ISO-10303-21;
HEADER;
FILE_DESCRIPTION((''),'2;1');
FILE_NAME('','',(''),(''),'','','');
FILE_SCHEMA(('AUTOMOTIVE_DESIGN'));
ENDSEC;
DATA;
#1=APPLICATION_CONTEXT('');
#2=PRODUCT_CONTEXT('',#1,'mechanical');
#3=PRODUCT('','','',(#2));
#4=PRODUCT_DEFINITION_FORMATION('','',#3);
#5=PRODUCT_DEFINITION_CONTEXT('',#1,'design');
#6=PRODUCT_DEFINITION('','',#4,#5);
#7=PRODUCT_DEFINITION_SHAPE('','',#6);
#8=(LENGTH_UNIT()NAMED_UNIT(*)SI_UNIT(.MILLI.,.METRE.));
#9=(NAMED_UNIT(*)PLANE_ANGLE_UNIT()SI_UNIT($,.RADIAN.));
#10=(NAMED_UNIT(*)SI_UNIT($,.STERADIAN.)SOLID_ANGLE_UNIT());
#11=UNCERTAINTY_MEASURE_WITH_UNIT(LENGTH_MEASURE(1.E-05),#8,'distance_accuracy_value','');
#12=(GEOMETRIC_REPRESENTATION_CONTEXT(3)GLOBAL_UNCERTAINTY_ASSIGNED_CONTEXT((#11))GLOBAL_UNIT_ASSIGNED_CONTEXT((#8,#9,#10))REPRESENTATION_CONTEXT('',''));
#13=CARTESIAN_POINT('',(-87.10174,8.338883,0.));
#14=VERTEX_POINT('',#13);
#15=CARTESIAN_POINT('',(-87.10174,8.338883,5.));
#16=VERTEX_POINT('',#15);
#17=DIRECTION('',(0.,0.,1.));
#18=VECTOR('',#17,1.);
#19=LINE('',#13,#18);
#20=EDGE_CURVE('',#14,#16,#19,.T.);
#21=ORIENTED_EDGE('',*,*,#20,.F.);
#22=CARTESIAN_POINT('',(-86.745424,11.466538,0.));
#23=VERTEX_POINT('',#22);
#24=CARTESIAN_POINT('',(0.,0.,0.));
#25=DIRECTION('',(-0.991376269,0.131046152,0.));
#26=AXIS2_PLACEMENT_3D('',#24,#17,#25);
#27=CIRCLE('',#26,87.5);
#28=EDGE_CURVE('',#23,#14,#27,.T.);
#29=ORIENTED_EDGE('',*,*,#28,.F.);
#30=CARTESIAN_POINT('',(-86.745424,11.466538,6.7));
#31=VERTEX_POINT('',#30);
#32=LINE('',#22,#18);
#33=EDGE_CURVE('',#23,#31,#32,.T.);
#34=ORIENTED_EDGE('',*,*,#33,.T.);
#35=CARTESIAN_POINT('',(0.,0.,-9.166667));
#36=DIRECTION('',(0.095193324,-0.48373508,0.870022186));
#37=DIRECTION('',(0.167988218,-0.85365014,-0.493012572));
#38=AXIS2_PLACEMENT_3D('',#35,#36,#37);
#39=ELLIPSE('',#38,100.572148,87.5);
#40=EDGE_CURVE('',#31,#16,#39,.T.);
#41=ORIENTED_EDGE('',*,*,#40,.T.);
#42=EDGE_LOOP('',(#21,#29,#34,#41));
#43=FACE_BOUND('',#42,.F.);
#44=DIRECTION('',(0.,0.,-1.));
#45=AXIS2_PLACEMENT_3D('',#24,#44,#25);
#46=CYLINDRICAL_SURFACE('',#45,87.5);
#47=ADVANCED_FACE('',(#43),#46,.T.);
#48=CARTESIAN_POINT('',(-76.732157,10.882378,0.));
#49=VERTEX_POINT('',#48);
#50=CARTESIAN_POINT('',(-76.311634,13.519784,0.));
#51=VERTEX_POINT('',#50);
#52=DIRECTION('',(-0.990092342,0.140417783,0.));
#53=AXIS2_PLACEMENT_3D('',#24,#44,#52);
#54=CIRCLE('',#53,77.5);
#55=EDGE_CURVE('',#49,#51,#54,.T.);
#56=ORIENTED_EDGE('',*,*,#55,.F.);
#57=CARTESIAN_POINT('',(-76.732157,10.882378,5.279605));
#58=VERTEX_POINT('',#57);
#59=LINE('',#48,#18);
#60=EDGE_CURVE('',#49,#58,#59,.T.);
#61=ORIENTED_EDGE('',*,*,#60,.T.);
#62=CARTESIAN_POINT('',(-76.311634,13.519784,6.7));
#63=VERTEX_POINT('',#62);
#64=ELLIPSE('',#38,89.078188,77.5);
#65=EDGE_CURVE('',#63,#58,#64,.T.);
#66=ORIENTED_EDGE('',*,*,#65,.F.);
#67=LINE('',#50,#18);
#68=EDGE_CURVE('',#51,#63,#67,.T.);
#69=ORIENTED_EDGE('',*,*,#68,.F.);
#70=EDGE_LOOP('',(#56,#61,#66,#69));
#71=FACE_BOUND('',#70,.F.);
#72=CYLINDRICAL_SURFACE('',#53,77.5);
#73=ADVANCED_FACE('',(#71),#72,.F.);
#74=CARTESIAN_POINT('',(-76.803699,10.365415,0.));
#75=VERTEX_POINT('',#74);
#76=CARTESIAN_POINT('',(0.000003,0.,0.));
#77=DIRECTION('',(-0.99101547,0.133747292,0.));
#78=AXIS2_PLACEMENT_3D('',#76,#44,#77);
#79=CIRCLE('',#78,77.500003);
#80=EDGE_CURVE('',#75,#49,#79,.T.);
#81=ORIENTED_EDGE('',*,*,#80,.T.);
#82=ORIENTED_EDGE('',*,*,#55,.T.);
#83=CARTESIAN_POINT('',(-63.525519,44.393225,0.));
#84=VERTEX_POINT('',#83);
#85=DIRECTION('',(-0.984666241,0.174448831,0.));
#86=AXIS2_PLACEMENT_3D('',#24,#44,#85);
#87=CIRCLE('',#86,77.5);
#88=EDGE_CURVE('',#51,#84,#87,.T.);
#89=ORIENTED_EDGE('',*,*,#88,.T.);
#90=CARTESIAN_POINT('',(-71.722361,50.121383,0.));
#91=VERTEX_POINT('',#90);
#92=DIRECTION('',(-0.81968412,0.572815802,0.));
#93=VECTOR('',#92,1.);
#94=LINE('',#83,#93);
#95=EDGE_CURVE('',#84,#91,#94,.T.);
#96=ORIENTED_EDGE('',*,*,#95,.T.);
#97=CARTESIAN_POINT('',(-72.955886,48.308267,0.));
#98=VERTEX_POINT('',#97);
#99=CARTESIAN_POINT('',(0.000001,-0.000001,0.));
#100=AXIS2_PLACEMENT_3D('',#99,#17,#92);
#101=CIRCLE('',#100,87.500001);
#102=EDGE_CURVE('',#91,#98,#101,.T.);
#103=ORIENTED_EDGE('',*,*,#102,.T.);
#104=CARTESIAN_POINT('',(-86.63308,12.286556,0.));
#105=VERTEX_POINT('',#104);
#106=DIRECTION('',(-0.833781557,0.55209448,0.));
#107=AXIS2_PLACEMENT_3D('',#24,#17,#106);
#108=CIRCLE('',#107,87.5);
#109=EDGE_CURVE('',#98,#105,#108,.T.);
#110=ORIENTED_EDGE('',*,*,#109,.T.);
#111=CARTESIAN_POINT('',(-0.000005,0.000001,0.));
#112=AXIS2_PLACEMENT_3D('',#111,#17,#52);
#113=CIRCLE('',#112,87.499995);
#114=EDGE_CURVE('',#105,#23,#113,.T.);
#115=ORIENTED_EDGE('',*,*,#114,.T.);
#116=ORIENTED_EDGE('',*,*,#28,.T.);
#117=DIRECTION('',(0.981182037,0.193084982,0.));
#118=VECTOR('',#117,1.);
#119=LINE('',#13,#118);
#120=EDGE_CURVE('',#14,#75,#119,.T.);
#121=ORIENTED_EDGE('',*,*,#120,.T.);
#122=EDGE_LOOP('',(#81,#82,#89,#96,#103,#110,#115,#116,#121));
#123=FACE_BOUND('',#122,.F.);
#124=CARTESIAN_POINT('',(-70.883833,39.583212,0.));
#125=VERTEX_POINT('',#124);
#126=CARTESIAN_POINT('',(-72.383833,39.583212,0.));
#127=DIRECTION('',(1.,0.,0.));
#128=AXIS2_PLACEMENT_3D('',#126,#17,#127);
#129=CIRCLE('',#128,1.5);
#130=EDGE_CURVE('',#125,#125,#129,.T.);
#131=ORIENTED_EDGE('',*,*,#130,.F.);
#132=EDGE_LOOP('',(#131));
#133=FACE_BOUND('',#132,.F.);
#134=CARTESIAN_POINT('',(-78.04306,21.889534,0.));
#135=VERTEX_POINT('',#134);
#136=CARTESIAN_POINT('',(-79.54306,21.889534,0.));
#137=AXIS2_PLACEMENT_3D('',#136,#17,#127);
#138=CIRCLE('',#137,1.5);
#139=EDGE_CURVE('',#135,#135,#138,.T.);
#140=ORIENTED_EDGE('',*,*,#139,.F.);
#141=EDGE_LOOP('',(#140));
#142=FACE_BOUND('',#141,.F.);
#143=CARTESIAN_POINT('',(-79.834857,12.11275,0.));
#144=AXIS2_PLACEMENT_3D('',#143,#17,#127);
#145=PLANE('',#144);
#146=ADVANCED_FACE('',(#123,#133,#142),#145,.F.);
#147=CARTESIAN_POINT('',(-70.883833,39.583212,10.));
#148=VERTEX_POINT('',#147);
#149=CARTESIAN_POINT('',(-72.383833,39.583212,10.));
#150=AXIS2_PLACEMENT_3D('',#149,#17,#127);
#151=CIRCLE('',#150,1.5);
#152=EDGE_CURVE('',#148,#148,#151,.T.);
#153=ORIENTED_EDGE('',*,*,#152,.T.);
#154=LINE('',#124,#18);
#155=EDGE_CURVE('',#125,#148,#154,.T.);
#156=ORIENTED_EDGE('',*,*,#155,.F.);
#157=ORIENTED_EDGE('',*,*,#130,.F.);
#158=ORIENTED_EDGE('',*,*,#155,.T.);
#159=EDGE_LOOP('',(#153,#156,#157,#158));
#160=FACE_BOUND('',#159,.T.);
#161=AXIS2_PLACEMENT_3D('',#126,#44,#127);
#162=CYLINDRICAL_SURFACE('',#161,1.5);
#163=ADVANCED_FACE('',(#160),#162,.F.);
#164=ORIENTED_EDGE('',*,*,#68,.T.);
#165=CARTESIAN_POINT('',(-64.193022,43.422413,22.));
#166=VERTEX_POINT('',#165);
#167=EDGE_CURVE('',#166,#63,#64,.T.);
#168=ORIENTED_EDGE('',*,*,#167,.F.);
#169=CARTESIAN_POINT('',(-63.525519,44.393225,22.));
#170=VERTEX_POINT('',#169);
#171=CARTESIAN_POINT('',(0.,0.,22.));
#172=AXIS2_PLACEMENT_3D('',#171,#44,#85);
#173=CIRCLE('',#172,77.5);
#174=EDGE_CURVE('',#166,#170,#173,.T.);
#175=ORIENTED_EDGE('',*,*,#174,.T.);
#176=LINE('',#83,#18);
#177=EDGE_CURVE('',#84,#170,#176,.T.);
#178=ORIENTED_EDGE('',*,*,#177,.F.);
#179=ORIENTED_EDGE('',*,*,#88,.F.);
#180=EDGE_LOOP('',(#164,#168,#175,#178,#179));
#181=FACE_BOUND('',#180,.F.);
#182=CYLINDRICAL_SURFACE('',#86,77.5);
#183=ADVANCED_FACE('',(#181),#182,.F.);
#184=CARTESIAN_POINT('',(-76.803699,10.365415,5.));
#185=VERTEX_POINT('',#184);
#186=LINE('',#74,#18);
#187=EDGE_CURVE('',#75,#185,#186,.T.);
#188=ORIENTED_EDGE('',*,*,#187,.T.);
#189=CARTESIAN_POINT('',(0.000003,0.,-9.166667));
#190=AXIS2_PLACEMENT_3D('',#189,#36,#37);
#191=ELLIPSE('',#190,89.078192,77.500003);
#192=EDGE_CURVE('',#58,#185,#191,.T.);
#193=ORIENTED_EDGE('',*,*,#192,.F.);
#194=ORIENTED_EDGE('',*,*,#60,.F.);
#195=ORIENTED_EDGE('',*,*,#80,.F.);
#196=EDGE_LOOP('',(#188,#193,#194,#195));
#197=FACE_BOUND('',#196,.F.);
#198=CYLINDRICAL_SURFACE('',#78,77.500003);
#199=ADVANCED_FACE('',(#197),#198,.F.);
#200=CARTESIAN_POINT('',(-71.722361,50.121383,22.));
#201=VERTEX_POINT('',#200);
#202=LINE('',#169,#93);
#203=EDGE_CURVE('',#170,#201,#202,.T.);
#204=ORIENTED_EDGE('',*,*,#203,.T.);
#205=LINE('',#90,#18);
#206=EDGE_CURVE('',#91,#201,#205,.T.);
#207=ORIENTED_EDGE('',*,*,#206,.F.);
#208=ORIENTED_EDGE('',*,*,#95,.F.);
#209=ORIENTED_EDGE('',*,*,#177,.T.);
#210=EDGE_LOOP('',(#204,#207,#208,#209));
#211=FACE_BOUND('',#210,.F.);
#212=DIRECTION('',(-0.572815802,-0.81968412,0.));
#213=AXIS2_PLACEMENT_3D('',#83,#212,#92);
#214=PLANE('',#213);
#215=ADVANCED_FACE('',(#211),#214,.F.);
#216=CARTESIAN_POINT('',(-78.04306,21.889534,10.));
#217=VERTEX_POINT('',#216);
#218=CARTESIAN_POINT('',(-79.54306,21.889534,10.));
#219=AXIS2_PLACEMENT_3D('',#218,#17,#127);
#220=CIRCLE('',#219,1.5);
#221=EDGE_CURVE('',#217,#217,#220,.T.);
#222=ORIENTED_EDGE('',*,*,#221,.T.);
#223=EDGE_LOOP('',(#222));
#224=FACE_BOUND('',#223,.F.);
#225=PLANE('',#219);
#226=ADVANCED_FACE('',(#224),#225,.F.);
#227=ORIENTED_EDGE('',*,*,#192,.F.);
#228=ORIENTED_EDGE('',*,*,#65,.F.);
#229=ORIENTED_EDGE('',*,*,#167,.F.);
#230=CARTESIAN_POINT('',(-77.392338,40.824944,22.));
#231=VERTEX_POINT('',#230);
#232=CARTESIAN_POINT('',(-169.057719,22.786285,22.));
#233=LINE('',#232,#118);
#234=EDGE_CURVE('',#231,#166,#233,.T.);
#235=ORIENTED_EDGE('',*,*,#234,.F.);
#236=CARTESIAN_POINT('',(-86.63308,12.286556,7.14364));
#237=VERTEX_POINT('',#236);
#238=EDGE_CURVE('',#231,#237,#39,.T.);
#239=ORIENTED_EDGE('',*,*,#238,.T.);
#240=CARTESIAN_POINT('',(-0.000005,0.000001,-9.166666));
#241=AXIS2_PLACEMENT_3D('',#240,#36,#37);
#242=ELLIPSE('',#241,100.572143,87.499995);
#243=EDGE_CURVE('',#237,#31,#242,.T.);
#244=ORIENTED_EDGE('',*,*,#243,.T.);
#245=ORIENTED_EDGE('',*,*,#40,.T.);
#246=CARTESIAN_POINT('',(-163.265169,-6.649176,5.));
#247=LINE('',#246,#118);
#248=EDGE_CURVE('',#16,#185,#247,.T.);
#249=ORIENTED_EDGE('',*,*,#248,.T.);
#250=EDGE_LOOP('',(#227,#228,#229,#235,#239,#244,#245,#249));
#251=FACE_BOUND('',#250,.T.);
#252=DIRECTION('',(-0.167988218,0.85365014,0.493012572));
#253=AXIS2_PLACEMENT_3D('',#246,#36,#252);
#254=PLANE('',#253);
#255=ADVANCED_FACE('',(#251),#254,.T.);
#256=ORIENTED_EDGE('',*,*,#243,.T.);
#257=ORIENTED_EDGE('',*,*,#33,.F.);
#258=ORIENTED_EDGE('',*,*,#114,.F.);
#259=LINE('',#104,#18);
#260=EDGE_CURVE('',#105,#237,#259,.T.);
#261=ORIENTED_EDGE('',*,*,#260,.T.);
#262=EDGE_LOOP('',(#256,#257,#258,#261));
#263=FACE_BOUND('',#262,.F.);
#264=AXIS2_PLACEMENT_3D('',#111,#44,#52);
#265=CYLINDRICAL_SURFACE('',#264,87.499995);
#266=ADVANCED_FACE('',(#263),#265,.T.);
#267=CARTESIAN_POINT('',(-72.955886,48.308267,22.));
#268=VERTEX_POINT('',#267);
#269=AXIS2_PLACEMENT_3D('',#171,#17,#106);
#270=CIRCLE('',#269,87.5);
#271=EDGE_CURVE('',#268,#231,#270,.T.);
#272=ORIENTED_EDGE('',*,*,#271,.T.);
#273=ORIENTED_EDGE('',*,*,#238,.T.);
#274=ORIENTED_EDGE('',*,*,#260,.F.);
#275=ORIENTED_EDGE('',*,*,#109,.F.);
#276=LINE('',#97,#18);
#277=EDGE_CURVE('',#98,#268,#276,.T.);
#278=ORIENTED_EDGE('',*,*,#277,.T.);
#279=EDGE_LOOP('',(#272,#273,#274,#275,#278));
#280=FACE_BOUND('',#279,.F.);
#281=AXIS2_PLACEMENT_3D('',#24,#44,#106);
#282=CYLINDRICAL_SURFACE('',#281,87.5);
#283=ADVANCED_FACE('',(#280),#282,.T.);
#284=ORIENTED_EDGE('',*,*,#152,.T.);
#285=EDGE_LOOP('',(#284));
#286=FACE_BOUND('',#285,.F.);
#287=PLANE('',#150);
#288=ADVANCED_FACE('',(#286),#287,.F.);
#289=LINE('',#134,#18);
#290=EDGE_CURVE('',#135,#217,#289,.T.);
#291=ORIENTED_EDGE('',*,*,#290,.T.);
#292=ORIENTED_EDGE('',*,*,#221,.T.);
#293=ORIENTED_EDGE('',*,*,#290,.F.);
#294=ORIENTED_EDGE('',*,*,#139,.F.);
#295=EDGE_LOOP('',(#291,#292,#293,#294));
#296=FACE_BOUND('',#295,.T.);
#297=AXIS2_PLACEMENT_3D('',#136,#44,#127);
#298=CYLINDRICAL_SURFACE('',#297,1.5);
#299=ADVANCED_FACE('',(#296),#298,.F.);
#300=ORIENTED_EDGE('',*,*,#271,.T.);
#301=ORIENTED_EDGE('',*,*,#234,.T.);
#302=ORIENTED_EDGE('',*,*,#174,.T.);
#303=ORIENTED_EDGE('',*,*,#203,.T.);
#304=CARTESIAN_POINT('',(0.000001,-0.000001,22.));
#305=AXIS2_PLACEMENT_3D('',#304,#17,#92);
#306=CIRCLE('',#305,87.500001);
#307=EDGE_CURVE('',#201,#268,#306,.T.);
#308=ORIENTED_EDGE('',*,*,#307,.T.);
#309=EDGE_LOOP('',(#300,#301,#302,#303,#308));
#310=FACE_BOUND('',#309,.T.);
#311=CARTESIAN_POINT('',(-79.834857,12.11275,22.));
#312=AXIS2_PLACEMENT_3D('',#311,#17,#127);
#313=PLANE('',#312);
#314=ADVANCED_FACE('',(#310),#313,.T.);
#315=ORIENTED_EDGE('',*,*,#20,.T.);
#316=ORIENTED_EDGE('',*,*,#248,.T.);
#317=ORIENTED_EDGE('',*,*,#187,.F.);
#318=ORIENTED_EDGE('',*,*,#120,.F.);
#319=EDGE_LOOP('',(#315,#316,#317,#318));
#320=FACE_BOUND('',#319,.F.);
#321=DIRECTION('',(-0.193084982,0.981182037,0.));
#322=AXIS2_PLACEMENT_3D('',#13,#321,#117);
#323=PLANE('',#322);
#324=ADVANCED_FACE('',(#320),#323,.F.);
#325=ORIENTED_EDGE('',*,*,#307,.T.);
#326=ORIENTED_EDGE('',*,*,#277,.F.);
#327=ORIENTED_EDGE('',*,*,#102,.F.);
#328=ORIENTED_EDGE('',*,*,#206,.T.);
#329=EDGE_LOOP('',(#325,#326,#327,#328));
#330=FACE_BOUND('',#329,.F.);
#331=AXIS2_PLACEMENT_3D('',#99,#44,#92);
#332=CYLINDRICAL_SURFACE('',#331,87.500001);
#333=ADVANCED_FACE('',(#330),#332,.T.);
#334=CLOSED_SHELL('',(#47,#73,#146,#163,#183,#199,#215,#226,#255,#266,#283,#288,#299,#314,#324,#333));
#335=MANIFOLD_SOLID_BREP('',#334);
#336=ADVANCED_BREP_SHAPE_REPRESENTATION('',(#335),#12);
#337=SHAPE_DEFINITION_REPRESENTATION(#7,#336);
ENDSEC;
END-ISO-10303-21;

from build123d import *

# Parameters (mm, degrees)
F0_R        = 1.5
F1_DEPTH    = 22
F2_T1_DEPTH = 165.7438624109
F3_DEPTH    = 10


# Not quite as in the source:
# - a fillet or chamfer that OpenCascade refuses, or shapes differently, is made with other operations: its cross-section is extruded or revolved along the edge and cut away or added


with BuildPart() as f1:
    # F0 (on Top) → F1 (new body)
    with BuildSketch(Plane.XY):
        with BuildLine():
            ThreePointArc((-76.7321565298, 10.8823781538), (-76.533256864, 12.202892845), (-76.3116336523, 13.5197843663))
            Line((-76.3116336523, 13.5197843663), (-84.2766601783, 11.9523616575))
            Line((-84.2766601783, 11.9523616575), (-76.7321565298, 10.8823781538))
        make_face()
        with BuildLine():
            ThreePointArc((-76.3116336523, 13.5197843663), (-71.9683443093, 28.7542591172), (-64.6180706596, 42.7873222372))
            Line((-64.6180706596, 42.7873222372), (-72.9558862286, 48.3082670421))
            ThreePointArc((-72.9558862286, 48.3082670421), (-81.8018975861, 31.0596128649), (-86.633079953, 12.2865559801))
            Line((-86.633079953, 12.2865559801), (-84.2766601783, 11.9523616575))
            Line((-84.2766601783, 11.9523616575), (-76.3116336523, 13.5197843663))
        make_face()
        with Locations((-79.5430595227, 21.8895336125)):
            Circle(F0_R, mode=Mode.SUBTRACT)
        with Locations((-72.3838330612, 39.5832124944)):
            Circle(F0_R, mode=Mode.SUBTRACT)
        with BuildLine():
            ThreePointArc((-64.6180706596, 42.7873222372), (-64.076826103, 43.5936962939), (-63.5255193134, 44.3932246628))
            Line((-63.5255193134, 44.3932246628), (-71.7223605151, 50.1213826839))
            ThreePointArc((-71.7223605151, 50.1213826839), (-72.3448036647, 49.218689364), (-72.9558862286, 48.3082670421))
            Line((-72.9558862286, 48.3082670421), (-64.6180706596, 42.7873222372))
        make_face()
        with BuildLine():
            ThreePointArc((-76.8036989266, 10.365415148), (-76.7683628871, 10.6239568725), (-76.7321565298, 10.8823781538))
            Line((-76.7321565298, 10.8823781538), (-84.2766601783, 11.9523616575))
            Line((-84.2766601783, 11.9523616575), (-86.7454235032, 11.466538329))
            ThreePointArc((-86.7454235032, 11.466538329), (-86.9376476661, 9.9043131153), (-87.1017395415, 8.3388829496))
            Line((-87.1017395415, 8.3388829496), (-76.8036989266, 10.365415148))
        make_face()
        with BuildLine():
            Line((-86.7454235032, 11.466538329), (-84.2766601783, 11.9523616575))
            Line((-84.2766601783, 11.9523616575), (-86.633079953, 12.2865559801))
            ThreePointArc((-86.633079953, 12.2865559801), (-86.6902213195, 11.8766799899), (-86.7454235032, 11.466538329))
        make_face()
        with Locations((-72.3838330612, 39.5832124944)):
            Circle(F0_R)
        with Locations((-79.5430595227, 21.8895336125)):
            Circle(F0_R)
    extrude(amount=F1_DEPTH)

    # F2: chamfer of 17 x 30 on 1 edges, made by hand

    # F2_s2 → F2_t1 (cut)
    with BuildSketch(Plane(origin=(-158.4380449398, -31.1787272483, 0), x_dir=(0, 0, 1), z_dir=(0.9811820369, 0.1930849823, 0))):
        Polygon((5, -25), (22, -55), (22, -25), align=None)
    extrude(amount=F2_T1_DEPTH, mode=Mode.SUBTRACT)

    # F0 (on Top) → F3 (cut)
    with BuildSketch(Plane.XY):
        with Locations((-72.3838330612, 39.5832124944)):
            Circle(F0_R)
        with Locations((-79.5430595227, 21.8895336125)):
            Circle(F0_R)
    extrude(amount=F3_DEPTH, mode=Mode.SUBTRACT)


solid = f1.part
